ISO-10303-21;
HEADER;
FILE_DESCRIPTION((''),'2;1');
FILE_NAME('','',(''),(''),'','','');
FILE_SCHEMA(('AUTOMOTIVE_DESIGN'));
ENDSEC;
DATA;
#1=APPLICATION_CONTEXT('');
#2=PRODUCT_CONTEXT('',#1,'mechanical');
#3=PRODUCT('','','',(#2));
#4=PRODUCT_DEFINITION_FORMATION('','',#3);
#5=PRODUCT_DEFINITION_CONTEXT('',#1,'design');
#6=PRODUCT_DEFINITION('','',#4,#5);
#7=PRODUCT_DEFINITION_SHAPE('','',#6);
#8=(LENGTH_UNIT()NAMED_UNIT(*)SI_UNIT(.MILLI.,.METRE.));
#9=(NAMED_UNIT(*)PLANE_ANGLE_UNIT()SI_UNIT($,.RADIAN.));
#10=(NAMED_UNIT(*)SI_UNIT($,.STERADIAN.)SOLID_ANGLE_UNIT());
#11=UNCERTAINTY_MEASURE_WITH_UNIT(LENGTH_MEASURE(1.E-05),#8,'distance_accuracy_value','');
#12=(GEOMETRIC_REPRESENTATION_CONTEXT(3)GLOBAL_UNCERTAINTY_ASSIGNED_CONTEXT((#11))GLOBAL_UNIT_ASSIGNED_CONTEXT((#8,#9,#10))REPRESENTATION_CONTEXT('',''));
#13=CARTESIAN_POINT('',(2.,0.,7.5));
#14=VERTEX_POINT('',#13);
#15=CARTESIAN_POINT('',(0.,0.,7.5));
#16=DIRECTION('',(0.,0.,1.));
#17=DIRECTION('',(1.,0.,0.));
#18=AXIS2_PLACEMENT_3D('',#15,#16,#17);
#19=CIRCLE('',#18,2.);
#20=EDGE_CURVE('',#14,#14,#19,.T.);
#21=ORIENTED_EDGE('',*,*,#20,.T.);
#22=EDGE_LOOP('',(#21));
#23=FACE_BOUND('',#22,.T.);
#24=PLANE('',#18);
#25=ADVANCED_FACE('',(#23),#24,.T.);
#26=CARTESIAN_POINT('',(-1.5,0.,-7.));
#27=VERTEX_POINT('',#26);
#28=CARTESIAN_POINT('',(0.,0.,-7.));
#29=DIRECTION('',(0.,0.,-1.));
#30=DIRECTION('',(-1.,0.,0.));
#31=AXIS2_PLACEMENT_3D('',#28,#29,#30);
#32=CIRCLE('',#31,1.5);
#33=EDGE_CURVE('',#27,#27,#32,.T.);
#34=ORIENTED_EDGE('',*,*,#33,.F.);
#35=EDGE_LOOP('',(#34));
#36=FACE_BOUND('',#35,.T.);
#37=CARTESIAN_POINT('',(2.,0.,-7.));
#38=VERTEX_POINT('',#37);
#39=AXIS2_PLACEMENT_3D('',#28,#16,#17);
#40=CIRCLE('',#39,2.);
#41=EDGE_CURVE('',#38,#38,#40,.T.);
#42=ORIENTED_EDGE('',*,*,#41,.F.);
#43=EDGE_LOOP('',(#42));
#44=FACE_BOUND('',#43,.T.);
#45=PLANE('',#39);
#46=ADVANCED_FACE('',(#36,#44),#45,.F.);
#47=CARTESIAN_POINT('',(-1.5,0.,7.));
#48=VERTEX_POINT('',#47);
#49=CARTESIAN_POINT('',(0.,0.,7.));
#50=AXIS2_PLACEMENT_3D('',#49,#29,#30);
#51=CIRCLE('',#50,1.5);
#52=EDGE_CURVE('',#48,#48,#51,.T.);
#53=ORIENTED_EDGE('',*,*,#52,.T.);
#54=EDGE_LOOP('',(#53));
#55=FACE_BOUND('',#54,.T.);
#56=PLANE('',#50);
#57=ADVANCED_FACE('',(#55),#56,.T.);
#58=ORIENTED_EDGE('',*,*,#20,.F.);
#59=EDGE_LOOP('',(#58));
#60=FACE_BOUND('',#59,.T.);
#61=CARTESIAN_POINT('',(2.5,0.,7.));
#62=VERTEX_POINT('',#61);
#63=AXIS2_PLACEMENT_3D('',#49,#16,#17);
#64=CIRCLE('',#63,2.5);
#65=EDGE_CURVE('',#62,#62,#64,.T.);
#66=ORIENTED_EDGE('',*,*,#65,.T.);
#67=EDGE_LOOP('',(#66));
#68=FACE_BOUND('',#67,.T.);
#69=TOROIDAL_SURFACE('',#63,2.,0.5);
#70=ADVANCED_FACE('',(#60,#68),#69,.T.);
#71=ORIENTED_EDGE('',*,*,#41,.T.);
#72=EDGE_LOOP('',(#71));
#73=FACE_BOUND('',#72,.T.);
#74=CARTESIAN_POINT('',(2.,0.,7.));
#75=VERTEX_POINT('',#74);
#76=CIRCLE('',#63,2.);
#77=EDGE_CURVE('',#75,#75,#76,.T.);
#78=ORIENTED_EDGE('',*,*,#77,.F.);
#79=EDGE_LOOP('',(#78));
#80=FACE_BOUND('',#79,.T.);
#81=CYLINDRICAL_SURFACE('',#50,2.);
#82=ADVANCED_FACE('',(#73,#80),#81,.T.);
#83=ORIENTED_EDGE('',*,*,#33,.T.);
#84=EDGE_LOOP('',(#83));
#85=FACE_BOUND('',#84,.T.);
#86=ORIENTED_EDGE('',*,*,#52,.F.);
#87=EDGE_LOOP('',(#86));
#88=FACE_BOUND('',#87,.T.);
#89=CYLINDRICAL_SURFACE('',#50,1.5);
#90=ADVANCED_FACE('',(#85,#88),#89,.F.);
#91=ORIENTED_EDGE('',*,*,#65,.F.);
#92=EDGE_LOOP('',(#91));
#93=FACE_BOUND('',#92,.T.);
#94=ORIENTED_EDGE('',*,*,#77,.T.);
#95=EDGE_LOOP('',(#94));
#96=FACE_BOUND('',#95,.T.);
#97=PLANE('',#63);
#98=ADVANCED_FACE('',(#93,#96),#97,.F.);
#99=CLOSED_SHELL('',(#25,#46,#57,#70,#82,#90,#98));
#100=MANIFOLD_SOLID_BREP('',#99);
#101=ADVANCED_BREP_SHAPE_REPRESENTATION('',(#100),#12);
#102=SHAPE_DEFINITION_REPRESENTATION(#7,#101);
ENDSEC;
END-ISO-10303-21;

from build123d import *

# Parameters (mm, degrees)
SKETCH_1_R          = 2
EXTRUDE_1_DEPTH     = 7
SKETCH_2_R          = 2.5
EXTRUDE_2_DEPTH     = 0.5
FILLET_1_R          = 0.5
SKETCH_3_R          = 1.5
CUT_EXTRUDE_1_DEPTH = 14


with BuildPart() as part:
    # 草图1 → 凸台-拉伸1 (new, symmetric)
    with BuildSketch(Plane.XY):
        Circle(SKETCH_1_R)
    extrude(amount=EXTRUDE_1_DEPTH, both=True)

    # 草图2 → 凸台-拉伸2 (add)
    with BuildSketch(Plane.XY.offset(7)):
        Circle(SKETCH_2_R)
    extrude(amount=EXTRUDE_2_DEPTH)

    # 圆角1
    fillet_1_edges = [part.edges().sort_by_distance(p)[0] for p in [
        (-2.5, 0, 7.5),
    ]]
    fillet(fillet_1_edges, radius=FILLET_1_R - 0.0001)  # a hair under: the kernel refuses the full size

    # 草图3 → 切除-拉伸1 (cut)
    with BuildSketch(Plane(origin=(0, 0, -7), x_dir=(-1, 0, 0), z_dir=(0, 0, -1))):
        Circle(SKETCH_3_R)
    extrude(amount=-CUT_EXTRUDE_1_DEPTH, mode=Mode.SUBTRACT)


solid = part.part
